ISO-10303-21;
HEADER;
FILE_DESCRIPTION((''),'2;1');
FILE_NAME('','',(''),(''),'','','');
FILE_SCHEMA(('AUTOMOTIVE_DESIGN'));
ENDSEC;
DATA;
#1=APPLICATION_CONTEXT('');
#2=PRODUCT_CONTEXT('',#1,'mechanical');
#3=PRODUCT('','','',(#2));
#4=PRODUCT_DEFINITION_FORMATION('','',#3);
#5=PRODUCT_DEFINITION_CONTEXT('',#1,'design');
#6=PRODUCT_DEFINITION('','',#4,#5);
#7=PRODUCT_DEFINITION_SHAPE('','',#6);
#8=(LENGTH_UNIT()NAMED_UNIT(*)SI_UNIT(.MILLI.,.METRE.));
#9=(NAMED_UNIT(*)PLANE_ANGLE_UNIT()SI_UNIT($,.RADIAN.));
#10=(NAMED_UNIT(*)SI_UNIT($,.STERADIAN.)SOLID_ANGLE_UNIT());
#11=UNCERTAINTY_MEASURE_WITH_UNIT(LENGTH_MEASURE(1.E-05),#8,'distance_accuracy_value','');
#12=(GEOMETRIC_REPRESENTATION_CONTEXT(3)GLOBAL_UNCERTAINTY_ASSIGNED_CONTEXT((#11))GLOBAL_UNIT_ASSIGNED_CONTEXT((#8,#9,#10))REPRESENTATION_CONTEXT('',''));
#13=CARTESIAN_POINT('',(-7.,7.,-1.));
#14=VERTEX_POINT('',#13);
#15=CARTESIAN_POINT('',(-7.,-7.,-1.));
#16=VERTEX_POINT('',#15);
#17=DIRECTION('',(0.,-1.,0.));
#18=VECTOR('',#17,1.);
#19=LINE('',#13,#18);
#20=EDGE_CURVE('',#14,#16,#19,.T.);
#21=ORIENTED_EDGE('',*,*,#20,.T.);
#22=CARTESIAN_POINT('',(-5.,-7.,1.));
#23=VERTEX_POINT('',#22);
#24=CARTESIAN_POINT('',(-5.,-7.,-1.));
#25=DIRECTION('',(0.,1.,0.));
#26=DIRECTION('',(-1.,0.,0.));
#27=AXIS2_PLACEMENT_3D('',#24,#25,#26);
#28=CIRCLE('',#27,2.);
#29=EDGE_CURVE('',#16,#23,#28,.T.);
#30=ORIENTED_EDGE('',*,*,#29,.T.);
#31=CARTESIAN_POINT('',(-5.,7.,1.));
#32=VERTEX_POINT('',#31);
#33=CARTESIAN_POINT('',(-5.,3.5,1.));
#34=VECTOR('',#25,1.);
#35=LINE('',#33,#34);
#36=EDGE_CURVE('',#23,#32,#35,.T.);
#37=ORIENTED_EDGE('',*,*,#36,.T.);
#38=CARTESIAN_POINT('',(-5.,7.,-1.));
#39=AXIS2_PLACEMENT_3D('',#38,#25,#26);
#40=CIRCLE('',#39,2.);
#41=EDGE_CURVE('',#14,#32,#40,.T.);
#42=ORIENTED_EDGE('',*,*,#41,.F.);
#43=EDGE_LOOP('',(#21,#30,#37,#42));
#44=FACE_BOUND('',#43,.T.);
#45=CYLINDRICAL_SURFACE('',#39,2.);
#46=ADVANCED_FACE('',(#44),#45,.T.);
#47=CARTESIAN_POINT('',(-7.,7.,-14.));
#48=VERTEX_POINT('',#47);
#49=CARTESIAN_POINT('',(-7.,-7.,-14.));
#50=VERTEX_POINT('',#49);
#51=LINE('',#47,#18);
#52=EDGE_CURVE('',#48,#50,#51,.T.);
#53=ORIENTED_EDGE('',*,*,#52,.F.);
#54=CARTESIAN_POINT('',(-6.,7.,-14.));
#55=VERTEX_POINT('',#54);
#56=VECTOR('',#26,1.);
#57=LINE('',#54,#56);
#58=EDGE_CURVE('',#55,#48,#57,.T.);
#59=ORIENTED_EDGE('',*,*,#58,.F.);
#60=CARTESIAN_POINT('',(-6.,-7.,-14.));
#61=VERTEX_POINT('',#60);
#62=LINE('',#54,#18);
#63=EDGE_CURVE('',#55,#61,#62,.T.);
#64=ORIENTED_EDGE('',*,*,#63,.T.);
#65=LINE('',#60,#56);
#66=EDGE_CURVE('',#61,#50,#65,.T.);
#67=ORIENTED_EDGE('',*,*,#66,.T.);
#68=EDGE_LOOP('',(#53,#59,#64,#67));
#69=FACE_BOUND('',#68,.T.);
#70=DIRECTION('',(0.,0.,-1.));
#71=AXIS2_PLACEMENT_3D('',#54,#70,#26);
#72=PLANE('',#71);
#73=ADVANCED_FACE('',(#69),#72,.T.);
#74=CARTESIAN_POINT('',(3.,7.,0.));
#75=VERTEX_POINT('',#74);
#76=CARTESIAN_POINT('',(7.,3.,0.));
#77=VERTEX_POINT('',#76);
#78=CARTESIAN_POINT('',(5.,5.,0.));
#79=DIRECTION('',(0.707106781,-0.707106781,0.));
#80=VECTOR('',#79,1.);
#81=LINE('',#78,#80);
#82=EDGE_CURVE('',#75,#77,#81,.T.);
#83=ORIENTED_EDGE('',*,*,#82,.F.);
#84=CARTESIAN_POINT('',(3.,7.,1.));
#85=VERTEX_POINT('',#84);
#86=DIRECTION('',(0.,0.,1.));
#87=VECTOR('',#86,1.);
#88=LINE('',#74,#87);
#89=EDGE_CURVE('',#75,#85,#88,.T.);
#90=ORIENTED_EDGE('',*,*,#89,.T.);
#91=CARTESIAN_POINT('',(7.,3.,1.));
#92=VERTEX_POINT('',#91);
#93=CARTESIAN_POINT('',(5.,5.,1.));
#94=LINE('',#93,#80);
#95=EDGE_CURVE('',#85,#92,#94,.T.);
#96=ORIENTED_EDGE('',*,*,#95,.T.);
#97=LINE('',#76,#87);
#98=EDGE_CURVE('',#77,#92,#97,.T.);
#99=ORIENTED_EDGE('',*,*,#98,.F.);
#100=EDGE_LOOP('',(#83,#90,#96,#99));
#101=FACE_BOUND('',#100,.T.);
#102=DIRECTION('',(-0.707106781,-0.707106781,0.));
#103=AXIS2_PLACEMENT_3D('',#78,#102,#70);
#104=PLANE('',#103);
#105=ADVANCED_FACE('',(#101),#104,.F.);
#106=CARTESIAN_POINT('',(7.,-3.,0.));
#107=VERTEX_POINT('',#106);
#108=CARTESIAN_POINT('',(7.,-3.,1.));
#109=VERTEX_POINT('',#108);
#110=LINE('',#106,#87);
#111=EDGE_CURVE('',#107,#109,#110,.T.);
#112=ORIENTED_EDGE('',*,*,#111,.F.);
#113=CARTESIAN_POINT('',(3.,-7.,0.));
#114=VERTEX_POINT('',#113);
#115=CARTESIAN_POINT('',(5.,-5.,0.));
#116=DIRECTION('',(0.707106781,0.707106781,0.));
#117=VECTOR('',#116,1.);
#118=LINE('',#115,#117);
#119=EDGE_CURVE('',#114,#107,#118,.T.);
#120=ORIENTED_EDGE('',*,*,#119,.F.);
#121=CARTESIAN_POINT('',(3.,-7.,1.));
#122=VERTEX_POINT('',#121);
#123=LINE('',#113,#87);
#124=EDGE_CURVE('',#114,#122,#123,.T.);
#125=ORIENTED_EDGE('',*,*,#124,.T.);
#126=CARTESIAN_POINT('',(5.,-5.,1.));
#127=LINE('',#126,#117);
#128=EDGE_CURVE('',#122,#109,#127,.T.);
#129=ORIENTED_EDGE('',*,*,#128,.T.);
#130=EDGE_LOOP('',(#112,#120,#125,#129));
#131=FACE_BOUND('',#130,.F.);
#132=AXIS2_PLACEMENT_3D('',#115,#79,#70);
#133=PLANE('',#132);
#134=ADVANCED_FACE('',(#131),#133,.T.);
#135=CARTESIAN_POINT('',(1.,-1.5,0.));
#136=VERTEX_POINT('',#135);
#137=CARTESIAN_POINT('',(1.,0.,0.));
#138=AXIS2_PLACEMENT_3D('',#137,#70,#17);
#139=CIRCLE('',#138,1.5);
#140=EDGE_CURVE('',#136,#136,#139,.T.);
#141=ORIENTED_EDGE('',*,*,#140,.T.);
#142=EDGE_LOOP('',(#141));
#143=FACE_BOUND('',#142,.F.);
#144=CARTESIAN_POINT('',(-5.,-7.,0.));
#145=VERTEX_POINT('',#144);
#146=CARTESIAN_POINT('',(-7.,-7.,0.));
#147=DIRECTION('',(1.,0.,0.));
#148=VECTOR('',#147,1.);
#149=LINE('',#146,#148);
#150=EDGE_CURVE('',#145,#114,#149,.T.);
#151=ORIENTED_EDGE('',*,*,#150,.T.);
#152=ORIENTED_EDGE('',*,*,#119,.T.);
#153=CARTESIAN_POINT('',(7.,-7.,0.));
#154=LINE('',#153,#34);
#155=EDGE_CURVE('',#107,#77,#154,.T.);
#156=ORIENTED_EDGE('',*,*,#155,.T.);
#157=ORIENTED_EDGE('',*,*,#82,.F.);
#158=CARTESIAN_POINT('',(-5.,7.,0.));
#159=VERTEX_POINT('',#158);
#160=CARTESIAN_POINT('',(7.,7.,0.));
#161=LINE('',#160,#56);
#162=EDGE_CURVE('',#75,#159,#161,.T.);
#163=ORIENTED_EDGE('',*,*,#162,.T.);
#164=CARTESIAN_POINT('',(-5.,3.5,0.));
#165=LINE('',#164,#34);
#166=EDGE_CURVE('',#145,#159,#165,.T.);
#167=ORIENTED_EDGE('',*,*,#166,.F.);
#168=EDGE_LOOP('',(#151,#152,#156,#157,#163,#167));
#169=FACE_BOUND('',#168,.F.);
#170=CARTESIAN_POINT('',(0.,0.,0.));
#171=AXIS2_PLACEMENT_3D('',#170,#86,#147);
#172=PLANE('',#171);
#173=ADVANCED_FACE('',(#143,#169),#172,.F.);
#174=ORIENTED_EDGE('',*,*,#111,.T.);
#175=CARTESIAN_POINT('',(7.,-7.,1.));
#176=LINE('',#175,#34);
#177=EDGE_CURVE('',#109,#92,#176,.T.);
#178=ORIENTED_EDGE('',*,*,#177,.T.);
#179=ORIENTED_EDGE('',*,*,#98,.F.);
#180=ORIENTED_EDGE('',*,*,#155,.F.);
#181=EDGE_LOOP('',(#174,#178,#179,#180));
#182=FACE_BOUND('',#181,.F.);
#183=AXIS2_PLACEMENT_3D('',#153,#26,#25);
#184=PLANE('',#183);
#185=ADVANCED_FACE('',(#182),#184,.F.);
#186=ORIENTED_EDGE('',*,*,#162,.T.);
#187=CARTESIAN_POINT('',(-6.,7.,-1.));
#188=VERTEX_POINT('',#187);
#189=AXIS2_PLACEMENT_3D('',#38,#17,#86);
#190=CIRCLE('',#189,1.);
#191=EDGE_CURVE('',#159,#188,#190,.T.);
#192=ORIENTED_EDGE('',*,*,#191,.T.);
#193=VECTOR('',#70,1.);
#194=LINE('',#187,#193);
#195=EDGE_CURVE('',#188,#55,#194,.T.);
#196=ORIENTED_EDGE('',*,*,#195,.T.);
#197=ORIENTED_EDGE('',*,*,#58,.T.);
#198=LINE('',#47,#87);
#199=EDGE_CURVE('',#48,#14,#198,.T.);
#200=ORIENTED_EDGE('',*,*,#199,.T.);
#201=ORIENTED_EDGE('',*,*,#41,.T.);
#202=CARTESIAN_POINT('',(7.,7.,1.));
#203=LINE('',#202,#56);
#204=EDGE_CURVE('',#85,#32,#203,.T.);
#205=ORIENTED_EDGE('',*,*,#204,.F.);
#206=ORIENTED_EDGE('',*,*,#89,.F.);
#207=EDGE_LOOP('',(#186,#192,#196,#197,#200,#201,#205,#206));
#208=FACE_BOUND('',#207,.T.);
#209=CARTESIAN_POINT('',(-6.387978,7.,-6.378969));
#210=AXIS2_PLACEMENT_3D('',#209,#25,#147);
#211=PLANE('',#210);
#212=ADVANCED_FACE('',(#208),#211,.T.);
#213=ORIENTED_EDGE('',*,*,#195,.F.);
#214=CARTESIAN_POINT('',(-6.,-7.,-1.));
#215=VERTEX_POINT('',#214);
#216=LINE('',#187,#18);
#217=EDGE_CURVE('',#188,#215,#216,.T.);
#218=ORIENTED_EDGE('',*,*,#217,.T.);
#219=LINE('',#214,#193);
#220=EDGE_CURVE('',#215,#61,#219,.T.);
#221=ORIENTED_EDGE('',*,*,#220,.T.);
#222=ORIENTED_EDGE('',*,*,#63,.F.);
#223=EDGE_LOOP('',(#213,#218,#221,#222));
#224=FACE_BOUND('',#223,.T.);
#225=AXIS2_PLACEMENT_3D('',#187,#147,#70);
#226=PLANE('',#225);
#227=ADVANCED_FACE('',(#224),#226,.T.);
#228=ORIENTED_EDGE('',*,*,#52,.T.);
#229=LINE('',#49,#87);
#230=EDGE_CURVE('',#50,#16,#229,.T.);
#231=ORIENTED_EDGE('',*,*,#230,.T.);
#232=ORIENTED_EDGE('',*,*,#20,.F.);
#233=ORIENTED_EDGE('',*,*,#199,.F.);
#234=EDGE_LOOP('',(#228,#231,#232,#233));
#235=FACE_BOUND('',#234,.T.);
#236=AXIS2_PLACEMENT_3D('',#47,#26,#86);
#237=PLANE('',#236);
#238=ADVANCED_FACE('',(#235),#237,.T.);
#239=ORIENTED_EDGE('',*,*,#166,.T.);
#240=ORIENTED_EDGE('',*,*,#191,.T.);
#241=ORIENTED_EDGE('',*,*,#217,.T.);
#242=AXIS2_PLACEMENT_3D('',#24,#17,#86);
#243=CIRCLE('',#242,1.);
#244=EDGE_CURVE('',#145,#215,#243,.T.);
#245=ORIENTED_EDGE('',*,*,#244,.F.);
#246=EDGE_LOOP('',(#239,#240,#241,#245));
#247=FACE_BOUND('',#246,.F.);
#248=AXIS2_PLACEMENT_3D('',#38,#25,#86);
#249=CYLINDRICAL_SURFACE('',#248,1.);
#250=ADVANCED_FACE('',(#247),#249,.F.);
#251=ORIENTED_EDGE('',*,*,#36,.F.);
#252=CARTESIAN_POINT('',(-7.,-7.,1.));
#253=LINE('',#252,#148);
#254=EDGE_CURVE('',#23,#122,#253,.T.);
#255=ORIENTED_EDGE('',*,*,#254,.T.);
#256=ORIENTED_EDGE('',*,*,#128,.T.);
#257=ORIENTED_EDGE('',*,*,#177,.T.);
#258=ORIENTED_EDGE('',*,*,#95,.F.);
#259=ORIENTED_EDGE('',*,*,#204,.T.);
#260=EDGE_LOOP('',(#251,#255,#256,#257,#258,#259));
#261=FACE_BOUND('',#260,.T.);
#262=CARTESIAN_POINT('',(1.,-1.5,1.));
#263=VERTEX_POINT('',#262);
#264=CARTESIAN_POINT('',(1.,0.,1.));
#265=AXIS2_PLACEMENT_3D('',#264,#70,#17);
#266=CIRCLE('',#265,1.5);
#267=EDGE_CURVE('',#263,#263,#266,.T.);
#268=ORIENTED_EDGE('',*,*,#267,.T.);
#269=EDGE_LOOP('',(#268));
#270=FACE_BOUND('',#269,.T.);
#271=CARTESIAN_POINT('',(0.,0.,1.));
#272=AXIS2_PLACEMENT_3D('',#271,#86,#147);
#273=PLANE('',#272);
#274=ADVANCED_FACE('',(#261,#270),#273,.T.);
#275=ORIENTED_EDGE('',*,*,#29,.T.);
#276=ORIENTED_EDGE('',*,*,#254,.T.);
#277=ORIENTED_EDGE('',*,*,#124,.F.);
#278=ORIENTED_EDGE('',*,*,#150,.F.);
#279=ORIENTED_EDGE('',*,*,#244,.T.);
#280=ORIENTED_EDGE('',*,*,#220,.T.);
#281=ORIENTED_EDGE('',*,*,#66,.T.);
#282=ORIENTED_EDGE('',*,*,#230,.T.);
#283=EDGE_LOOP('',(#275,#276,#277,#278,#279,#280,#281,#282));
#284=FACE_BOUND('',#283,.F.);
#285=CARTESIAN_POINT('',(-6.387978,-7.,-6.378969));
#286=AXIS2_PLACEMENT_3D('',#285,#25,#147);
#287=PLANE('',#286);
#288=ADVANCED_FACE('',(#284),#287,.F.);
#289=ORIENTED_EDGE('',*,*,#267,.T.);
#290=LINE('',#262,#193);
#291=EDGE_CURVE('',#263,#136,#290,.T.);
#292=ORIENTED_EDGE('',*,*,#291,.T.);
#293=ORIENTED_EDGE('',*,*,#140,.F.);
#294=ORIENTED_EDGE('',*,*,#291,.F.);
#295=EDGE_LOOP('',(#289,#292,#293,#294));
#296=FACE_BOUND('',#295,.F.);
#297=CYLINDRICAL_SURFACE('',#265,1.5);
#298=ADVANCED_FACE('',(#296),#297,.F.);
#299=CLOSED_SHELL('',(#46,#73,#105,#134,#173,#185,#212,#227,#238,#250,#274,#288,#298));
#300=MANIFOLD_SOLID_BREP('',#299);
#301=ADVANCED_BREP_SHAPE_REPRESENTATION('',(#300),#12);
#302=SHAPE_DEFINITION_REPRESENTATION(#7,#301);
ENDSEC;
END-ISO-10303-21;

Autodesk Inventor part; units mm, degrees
ref_plane "YZ Plane" through (0, 0, 0) normal (1, 0, 0) x (0, 1, 0)
ref_plane "XZ Plane" through (0, 0, 0) normal (0, 1, 0) x (-1, 0, 0)
ref_plane "XY Plane" through (0, 0, 0) normal (0, 0, 1) x (1, 0, 0)
sketch "Sketch1" plane through (0, 0, 0) normal (0, 0, 1) x (1, 0, 0)
  line L0 (-7, -7) -> (7, -7)
  line L1 (7, -7) -> (7, 7)
  line L2 (7, 7) -> (-7, 7)
  line L3 (-7, 7) -> (-7, -7)
  line L4 (-7, -7) -> (7, 7) construction
  line L5 (7, -7) -> (-7, 7) construction
  point P0 (0, 0)
  dimension "d0" = 14
  dimension "d1" = 14
extrude "Plate1" add sketch "Sketch1" along normal blind 1
sketch "Sketch2" plane through (-6, 7, 1) normal (-1, 0, 0) x (0, -1, 0)
  line L0 (14, 0) -> (0, 0)
  line L1 (0, 0) -> (0, -15)
  line L2 (0, -15) -> (14, -15)
  line L3 (14, -15) -> (14, 0)
edge flange "Flange1" height 15 angle 90 thickness 1 bend radius 1 thickness toward (-1, 0, 0) relief tear relief width 1 relief depth 0.5 edges at (-7, 0, 0) wall of the first edge with corners at (-6, -7, 1) (-6, 7, 1) (-6, 7, -14) (-6, -7, -14)
bend "Bend1"
corner "Corner1"
sketch "Sketch3" plane through (0, 0, 1) normal (0, 0, 1) x (1, 0, 0)
  line L0 (7, -7) -> (7, 7) projected
  point P0 (0, 0)
  point P1 (1, 0)
  point P2 (7, 0)
  dimension "d13" = 6
hole "Hole1" at (1, 0, 1) direction (0, 0, -1) diameter 3 depth 1 tip angle 118
chamfer "Corner Chamfer1" distance 4 angle 45 2 edges at (7, 7, 0.5) (7, -7, 0.5)
equation "\"d1\" = d0"
equation "\"d19\" = Thickness"
equation "\"d3\" = BendReliefWidth"
equation "\"d4\" = BendReliefDepth"
equation "\"d5\" = MinimumRemnant"
equation "\"d6\" = BendRadius"
equation "\"d9\" = BendRadius"
equation "\"d10\" = CornerReliefSize"
equation "\"d11\" = GapSize"
equation "\"d12\" = JacobiRadiusSize"
equation "\"BendRadius\" = Thickness"
equation "\"BendReliefWidth\" = Thickness"
equation "\"BendReliefDepth\" = 0.5 * Thickness"
equation "\"CornerReliefSize\" = 4 * Thickness"
equation "\"MinimumRemnant\" = 2 * Thickness"
equation "\"TransitionRadius\" = BendRadius"
equation "\"JacobiRadiusSize\" = BendRadius"
equation "\"GapSize\" = Thickness"
equation "\"d2\" = BendRadius"
equation "\"Thickness\" = 1"
